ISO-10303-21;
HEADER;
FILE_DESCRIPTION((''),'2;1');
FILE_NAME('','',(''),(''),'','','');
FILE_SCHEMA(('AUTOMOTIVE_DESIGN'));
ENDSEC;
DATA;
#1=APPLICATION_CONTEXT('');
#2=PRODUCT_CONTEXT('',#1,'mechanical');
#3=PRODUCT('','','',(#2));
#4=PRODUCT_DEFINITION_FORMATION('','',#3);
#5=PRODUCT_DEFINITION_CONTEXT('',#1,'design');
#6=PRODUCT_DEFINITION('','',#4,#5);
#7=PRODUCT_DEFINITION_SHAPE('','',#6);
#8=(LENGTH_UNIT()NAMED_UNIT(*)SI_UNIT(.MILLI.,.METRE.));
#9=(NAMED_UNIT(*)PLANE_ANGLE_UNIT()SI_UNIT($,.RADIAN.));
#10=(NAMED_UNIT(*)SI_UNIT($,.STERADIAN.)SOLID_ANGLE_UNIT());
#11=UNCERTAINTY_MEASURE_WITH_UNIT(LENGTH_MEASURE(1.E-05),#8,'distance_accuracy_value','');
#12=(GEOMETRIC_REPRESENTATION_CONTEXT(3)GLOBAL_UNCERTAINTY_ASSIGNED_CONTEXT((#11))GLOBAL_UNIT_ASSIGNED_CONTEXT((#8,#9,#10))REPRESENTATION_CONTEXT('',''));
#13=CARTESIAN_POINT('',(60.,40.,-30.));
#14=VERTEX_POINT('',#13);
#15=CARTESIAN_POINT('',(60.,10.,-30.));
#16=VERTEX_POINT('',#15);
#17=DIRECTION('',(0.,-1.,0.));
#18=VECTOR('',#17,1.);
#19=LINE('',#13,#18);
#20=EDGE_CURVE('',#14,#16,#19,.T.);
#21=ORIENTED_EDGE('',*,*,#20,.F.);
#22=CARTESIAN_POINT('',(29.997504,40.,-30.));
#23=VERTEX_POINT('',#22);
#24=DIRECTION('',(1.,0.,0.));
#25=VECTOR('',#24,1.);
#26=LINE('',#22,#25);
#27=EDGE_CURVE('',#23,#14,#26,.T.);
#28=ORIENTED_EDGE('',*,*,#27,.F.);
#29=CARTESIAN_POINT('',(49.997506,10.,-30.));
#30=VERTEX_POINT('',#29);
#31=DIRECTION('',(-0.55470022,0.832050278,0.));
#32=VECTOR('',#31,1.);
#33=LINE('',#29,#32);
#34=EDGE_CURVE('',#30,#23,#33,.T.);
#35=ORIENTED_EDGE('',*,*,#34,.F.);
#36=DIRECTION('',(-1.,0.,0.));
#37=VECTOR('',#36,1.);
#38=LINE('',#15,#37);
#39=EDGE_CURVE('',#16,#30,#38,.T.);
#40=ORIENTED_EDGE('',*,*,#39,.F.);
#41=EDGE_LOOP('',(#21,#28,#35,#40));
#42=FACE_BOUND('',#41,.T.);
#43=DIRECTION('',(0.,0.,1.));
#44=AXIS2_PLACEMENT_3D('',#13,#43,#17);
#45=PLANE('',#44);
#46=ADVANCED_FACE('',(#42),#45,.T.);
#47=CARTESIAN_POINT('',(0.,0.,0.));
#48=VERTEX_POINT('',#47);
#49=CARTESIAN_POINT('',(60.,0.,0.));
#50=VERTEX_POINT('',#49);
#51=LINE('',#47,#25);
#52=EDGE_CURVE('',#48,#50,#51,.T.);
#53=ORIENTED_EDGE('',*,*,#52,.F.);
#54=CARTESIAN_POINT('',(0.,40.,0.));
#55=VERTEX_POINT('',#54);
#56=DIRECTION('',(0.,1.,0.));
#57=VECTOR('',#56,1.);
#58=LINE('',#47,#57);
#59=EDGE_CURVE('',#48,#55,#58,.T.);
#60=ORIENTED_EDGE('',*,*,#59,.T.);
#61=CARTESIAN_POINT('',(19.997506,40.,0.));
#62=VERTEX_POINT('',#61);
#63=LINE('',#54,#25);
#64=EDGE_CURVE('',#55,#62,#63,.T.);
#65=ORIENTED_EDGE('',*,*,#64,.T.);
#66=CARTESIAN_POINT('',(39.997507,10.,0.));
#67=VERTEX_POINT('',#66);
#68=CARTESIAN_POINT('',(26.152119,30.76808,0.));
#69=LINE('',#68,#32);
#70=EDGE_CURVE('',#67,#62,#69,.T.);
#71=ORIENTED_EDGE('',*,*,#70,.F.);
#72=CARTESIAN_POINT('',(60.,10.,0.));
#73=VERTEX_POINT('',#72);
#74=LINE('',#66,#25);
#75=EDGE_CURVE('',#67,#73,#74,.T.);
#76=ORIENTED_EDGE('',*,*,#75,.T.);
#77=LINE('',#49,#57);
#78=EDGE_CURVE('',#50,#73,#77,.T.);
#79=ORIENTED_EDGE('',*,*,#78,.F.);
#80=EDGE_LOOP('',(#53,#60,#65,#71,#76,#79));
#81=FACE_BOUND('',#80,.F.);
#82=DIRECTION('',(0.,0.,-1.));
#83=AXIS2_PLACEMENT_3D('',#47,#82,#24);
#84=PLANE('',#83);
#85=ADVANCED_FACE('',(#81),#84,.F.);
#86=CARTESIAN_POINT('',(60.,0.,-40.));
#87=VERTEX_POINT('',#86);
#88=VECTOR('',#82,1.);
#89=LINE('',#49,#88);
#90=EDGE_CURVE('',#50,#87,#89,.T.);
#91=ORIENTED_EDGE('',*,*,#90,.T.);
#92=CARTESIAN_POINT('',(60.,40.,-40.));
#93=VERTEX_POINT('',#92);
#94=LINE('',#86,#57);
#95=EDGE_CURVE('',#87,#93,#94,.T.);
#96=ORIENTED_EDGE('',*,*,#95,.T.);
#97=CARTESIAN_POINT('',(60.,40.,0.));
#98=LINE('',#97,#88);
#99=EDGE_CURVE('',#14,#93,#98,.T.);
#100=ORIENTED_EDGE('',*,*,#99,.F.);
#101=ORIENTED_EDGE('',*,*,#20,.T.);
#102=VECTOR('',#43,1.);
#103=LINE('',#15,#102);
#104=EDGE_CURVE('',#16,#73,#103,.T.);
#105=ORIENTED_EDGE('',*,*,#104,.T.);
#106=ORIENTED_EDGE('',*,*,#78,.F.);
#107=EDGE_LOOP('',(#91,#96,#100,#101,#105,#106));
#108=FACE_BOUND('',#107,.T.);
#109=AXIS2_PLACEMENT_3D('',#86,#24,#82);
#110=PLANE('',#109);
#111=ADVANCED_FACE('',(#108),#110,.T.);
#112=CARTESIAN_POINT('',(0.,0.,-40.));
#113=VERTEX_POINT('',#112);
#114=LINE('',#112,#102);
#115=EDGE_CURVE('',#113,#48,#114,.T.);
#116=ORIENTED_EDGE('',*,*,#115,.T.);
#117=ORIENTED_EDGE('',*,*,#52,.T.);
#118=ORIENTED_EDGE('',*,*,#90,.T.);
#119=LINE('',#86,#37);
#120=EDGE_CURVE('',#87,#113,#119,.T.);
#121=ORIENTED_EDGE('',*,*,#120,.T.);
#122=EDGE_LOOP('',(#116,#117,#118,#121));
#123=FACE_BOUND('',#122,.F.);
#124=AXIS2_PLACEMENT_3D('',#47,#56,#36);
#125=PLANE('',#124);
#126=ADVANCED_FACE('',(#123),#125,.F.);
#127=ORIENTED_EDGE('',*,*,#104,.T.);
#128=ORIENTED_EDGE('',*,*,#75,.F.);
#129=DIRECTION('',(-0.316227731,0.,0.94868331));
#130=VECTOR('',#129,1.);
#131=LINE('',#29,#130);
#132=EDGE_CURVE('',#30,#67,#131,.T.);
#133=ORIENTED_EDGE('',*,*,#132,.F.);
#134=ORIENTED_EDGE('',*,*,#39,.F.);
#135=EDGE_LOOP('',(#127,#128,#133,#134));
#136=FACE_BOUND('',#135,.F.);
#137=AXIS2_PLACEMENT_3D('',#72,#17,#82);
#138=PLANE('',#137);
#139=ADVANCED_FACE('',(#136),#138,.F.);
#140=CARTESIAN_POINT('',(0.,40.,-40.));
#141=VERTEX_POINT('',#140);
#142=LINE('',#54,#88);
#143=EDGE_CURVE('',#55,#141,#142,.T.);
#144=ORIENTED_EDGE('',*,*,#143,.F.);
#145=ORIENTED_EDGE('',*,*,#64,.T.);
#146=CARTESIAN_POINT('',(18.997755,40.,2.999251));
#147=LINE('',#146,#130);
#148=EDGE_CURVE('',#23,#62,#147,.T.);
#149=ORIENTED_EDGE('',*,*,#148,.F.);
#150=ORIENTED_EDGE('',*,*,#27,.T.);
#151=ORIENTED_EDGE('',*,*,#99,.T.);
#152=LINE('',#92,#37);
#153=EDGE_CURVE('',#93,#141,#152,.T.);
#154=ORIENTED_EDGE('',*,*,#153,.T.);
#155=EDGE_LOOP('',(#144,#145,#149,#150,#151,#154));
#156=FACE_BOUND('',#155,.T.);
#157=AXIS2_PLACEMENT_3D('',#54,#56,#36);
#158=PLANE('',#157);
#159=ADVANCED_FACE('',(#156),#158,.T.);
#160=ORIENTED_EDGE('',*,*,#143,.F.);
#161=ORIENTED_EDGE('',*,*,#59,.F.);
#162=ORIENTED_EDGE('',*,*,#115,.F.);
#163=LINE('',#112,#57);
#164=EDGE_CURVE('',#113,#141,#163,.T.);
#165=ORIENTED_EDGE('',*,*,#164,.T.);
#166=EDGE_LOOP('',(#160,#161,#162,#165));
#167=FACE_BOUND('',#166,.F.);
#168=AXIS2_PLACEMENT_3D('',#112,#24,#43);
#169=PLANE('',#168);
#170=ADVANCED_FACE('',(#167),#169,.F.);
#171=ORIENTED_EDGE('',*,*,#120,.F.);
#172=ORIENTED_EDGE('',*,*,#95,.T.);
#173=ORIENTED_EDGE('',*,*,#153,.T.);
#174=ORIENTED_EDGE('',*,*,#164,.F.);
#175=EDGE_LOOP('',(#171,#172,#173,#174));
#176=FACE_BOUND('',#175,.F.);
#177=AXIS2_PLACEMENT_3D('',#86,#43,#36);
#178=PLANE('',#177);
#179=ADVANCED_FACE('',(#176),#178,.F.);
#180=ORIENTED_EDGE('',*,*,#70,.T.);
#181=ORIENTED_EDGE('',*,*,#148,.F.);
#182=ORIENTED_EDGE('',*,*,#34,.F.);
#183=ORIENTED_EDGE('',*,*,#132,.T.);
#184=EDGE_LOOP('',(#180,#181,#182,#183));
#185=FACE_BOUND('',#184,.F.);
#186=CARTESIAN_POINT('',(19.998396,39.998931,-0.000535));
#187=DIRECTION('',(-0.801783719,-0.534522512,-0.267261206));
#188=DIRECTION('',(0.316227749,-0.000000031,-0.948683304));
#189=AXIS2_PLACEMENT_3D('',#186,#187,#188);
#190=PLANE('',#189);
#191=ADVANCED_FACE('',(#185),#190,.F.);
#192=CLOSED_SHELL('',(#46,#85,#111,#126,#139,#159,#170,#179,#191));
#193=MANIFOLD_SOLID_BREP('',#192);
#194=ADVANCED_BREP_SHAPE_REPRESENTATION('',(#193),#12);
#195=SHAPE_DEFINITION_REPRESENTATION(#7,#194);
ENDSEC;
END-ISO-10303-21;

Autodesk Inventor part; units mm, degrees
ref_plane "YZ Plane" through (0, 0, 0) normal (1, 0, 0) x (0, 1, 0)
ref_plane "XZ Plane" through (0, 0, 0) normal (0, 1, 0) x (-1, 0, 0)
sketch "草圖1" plane through (0, 0, 0) normal (0, 1, 0) x (-1, 0, 0)
  line L0 (0, 0) -> (-60, 0)
  line L1 (-60, 0) -> (-60, -40)
  line L2 (-60, -40) -> (0, -40)
  line L3 (0, -40) -> (0, 0)
  dimension "d0" = 60
  dimension "d1" = 40
extrude "擠出1" add sketch "草圖1" along normal blind 40
sketch "草圖2" plane through (60, 0, 0) normal (1, 0, 0) x (0, 0, -1)
  line L0 (0, 40) -> (30, 40)
  line L1 (30, 40) -> (30, 10)
  line L2 (30, 10) -> (0, 10)
  line L3 (0, 10) -> (0, 40)
  line L4 (40, 0) -> (40, 40) projected
  line L5 (0, 0) -> (40, 0) projected
  dimension "d4" = 10
  dimension "d5" = 10
extrude "擠出2" cut sketch "草圖2" against normal blind 10
sketch "草圖6" plane through (0, 40, 0) normal (0, 1, 0) x (1, 0, 0)
  line L0 (0, 0) -> (60, 0) projected
  line L1 (60, 30) -> (60, 0) projected
  line L2 (0, 40) -> (0, 0) projected
  line L3 (50, 30) -> (60, 30) projected
  point P0 (20, 0)
  point P1 (30, 30)
  dimension "d12" = 30
  dimension "d13" = 20
  dimension "d14" = 0
sketch "草圖7" plane through (0, 0, 0) normal (0, 0, 1) x (1, 0, 0)
  line L0 (60, 0) -> (60, 10) projected
  line L1 (60, 10) -> (50, 10) projected
  point P0 (0, 0)
  point P1 (40, 10)
  dimension "d15" = 20
  dimension "d16" = 0
ref_plane "工作平面2" through (20, 40, 0) normal (-0.8017837, -0.5345225, -0.2672612) x (0.3162278, 0, -0.9486833)
sketch "草圖8" plane through (20, 40, 0) normal (-0.8017837, -0.5345225, -0.2672612) x (0.3162278, 0, -0.9486833)
  line L0 (-6.3246, -10.1419) -> (9.4868, 15.2128) projected
  line L1 (-1.8957, -3.0399) -> (37.7838, -3.0399)
  line L2 (37.7838, -3.0399) -> (37.7838, 41.2626)
  line L3 (37.7838, 41.2626) -> (-1.8957, 41.2626)
  line L4 (-1.8957, 41.2626) -> (-1.8957, -3.0399)
  point P0 (-6.3246, 23.6643)
extrude "擠出3" cut sketch "草圖8" against normal blind 50
sketch "草圖9" plane through (0, 40, 0) normal (0, 1, 0) x (1, 0, 0)
  line L0 (60, 30) -> (50, 30) projected
  line L1 (60, 40) -> (0, 40) projected
  line L2 (60, 30) -> (0, 30)
  line L3 (0, 30) -> (0, 40)
  line L4 (0, 40) -> (60, 40)
  line L5 (60, 40) -> (60, 30)
  point P0 (0, 0)
extrude "擠出4" add sketch "草圖9" against normal up to next
sketch "草圖10" plane through (60, 0, -40) normal (1, 0, 0) x (0, 0, -1)
  line L0 (-10, 40) -> (0, 40) projected
  line L1 (0, 40) -> (-10, 40)
  line L2 (-10, 40) -> (-10, 0)
  line L3 (-10, 0) -> (0, 0)
  line L4 (0, 0) -> (0, 40)
  line L5 (-40, 0) -> (-40, 40) projected
  line L6 (0, 0) -> (-40, 0)
  line L7 (-40, 0) -> (-40, 10)
  line L8 (-40, 10) -> (0, 10)
  line L9 (0, 10) -> (0, 0)
  dimension "d21" = 0
  dimension "d22" = 10
  dimension "d23" = 10
extrude "擠出5" add sketch "草圖10" against normal up to next
delete faces "刪除面1" heal yes whole lump no faces at (50, 30, -29.8851) (49.8276, 20.2573, -29.8851)
properties part number "49 (73500.000 mm^3)"
